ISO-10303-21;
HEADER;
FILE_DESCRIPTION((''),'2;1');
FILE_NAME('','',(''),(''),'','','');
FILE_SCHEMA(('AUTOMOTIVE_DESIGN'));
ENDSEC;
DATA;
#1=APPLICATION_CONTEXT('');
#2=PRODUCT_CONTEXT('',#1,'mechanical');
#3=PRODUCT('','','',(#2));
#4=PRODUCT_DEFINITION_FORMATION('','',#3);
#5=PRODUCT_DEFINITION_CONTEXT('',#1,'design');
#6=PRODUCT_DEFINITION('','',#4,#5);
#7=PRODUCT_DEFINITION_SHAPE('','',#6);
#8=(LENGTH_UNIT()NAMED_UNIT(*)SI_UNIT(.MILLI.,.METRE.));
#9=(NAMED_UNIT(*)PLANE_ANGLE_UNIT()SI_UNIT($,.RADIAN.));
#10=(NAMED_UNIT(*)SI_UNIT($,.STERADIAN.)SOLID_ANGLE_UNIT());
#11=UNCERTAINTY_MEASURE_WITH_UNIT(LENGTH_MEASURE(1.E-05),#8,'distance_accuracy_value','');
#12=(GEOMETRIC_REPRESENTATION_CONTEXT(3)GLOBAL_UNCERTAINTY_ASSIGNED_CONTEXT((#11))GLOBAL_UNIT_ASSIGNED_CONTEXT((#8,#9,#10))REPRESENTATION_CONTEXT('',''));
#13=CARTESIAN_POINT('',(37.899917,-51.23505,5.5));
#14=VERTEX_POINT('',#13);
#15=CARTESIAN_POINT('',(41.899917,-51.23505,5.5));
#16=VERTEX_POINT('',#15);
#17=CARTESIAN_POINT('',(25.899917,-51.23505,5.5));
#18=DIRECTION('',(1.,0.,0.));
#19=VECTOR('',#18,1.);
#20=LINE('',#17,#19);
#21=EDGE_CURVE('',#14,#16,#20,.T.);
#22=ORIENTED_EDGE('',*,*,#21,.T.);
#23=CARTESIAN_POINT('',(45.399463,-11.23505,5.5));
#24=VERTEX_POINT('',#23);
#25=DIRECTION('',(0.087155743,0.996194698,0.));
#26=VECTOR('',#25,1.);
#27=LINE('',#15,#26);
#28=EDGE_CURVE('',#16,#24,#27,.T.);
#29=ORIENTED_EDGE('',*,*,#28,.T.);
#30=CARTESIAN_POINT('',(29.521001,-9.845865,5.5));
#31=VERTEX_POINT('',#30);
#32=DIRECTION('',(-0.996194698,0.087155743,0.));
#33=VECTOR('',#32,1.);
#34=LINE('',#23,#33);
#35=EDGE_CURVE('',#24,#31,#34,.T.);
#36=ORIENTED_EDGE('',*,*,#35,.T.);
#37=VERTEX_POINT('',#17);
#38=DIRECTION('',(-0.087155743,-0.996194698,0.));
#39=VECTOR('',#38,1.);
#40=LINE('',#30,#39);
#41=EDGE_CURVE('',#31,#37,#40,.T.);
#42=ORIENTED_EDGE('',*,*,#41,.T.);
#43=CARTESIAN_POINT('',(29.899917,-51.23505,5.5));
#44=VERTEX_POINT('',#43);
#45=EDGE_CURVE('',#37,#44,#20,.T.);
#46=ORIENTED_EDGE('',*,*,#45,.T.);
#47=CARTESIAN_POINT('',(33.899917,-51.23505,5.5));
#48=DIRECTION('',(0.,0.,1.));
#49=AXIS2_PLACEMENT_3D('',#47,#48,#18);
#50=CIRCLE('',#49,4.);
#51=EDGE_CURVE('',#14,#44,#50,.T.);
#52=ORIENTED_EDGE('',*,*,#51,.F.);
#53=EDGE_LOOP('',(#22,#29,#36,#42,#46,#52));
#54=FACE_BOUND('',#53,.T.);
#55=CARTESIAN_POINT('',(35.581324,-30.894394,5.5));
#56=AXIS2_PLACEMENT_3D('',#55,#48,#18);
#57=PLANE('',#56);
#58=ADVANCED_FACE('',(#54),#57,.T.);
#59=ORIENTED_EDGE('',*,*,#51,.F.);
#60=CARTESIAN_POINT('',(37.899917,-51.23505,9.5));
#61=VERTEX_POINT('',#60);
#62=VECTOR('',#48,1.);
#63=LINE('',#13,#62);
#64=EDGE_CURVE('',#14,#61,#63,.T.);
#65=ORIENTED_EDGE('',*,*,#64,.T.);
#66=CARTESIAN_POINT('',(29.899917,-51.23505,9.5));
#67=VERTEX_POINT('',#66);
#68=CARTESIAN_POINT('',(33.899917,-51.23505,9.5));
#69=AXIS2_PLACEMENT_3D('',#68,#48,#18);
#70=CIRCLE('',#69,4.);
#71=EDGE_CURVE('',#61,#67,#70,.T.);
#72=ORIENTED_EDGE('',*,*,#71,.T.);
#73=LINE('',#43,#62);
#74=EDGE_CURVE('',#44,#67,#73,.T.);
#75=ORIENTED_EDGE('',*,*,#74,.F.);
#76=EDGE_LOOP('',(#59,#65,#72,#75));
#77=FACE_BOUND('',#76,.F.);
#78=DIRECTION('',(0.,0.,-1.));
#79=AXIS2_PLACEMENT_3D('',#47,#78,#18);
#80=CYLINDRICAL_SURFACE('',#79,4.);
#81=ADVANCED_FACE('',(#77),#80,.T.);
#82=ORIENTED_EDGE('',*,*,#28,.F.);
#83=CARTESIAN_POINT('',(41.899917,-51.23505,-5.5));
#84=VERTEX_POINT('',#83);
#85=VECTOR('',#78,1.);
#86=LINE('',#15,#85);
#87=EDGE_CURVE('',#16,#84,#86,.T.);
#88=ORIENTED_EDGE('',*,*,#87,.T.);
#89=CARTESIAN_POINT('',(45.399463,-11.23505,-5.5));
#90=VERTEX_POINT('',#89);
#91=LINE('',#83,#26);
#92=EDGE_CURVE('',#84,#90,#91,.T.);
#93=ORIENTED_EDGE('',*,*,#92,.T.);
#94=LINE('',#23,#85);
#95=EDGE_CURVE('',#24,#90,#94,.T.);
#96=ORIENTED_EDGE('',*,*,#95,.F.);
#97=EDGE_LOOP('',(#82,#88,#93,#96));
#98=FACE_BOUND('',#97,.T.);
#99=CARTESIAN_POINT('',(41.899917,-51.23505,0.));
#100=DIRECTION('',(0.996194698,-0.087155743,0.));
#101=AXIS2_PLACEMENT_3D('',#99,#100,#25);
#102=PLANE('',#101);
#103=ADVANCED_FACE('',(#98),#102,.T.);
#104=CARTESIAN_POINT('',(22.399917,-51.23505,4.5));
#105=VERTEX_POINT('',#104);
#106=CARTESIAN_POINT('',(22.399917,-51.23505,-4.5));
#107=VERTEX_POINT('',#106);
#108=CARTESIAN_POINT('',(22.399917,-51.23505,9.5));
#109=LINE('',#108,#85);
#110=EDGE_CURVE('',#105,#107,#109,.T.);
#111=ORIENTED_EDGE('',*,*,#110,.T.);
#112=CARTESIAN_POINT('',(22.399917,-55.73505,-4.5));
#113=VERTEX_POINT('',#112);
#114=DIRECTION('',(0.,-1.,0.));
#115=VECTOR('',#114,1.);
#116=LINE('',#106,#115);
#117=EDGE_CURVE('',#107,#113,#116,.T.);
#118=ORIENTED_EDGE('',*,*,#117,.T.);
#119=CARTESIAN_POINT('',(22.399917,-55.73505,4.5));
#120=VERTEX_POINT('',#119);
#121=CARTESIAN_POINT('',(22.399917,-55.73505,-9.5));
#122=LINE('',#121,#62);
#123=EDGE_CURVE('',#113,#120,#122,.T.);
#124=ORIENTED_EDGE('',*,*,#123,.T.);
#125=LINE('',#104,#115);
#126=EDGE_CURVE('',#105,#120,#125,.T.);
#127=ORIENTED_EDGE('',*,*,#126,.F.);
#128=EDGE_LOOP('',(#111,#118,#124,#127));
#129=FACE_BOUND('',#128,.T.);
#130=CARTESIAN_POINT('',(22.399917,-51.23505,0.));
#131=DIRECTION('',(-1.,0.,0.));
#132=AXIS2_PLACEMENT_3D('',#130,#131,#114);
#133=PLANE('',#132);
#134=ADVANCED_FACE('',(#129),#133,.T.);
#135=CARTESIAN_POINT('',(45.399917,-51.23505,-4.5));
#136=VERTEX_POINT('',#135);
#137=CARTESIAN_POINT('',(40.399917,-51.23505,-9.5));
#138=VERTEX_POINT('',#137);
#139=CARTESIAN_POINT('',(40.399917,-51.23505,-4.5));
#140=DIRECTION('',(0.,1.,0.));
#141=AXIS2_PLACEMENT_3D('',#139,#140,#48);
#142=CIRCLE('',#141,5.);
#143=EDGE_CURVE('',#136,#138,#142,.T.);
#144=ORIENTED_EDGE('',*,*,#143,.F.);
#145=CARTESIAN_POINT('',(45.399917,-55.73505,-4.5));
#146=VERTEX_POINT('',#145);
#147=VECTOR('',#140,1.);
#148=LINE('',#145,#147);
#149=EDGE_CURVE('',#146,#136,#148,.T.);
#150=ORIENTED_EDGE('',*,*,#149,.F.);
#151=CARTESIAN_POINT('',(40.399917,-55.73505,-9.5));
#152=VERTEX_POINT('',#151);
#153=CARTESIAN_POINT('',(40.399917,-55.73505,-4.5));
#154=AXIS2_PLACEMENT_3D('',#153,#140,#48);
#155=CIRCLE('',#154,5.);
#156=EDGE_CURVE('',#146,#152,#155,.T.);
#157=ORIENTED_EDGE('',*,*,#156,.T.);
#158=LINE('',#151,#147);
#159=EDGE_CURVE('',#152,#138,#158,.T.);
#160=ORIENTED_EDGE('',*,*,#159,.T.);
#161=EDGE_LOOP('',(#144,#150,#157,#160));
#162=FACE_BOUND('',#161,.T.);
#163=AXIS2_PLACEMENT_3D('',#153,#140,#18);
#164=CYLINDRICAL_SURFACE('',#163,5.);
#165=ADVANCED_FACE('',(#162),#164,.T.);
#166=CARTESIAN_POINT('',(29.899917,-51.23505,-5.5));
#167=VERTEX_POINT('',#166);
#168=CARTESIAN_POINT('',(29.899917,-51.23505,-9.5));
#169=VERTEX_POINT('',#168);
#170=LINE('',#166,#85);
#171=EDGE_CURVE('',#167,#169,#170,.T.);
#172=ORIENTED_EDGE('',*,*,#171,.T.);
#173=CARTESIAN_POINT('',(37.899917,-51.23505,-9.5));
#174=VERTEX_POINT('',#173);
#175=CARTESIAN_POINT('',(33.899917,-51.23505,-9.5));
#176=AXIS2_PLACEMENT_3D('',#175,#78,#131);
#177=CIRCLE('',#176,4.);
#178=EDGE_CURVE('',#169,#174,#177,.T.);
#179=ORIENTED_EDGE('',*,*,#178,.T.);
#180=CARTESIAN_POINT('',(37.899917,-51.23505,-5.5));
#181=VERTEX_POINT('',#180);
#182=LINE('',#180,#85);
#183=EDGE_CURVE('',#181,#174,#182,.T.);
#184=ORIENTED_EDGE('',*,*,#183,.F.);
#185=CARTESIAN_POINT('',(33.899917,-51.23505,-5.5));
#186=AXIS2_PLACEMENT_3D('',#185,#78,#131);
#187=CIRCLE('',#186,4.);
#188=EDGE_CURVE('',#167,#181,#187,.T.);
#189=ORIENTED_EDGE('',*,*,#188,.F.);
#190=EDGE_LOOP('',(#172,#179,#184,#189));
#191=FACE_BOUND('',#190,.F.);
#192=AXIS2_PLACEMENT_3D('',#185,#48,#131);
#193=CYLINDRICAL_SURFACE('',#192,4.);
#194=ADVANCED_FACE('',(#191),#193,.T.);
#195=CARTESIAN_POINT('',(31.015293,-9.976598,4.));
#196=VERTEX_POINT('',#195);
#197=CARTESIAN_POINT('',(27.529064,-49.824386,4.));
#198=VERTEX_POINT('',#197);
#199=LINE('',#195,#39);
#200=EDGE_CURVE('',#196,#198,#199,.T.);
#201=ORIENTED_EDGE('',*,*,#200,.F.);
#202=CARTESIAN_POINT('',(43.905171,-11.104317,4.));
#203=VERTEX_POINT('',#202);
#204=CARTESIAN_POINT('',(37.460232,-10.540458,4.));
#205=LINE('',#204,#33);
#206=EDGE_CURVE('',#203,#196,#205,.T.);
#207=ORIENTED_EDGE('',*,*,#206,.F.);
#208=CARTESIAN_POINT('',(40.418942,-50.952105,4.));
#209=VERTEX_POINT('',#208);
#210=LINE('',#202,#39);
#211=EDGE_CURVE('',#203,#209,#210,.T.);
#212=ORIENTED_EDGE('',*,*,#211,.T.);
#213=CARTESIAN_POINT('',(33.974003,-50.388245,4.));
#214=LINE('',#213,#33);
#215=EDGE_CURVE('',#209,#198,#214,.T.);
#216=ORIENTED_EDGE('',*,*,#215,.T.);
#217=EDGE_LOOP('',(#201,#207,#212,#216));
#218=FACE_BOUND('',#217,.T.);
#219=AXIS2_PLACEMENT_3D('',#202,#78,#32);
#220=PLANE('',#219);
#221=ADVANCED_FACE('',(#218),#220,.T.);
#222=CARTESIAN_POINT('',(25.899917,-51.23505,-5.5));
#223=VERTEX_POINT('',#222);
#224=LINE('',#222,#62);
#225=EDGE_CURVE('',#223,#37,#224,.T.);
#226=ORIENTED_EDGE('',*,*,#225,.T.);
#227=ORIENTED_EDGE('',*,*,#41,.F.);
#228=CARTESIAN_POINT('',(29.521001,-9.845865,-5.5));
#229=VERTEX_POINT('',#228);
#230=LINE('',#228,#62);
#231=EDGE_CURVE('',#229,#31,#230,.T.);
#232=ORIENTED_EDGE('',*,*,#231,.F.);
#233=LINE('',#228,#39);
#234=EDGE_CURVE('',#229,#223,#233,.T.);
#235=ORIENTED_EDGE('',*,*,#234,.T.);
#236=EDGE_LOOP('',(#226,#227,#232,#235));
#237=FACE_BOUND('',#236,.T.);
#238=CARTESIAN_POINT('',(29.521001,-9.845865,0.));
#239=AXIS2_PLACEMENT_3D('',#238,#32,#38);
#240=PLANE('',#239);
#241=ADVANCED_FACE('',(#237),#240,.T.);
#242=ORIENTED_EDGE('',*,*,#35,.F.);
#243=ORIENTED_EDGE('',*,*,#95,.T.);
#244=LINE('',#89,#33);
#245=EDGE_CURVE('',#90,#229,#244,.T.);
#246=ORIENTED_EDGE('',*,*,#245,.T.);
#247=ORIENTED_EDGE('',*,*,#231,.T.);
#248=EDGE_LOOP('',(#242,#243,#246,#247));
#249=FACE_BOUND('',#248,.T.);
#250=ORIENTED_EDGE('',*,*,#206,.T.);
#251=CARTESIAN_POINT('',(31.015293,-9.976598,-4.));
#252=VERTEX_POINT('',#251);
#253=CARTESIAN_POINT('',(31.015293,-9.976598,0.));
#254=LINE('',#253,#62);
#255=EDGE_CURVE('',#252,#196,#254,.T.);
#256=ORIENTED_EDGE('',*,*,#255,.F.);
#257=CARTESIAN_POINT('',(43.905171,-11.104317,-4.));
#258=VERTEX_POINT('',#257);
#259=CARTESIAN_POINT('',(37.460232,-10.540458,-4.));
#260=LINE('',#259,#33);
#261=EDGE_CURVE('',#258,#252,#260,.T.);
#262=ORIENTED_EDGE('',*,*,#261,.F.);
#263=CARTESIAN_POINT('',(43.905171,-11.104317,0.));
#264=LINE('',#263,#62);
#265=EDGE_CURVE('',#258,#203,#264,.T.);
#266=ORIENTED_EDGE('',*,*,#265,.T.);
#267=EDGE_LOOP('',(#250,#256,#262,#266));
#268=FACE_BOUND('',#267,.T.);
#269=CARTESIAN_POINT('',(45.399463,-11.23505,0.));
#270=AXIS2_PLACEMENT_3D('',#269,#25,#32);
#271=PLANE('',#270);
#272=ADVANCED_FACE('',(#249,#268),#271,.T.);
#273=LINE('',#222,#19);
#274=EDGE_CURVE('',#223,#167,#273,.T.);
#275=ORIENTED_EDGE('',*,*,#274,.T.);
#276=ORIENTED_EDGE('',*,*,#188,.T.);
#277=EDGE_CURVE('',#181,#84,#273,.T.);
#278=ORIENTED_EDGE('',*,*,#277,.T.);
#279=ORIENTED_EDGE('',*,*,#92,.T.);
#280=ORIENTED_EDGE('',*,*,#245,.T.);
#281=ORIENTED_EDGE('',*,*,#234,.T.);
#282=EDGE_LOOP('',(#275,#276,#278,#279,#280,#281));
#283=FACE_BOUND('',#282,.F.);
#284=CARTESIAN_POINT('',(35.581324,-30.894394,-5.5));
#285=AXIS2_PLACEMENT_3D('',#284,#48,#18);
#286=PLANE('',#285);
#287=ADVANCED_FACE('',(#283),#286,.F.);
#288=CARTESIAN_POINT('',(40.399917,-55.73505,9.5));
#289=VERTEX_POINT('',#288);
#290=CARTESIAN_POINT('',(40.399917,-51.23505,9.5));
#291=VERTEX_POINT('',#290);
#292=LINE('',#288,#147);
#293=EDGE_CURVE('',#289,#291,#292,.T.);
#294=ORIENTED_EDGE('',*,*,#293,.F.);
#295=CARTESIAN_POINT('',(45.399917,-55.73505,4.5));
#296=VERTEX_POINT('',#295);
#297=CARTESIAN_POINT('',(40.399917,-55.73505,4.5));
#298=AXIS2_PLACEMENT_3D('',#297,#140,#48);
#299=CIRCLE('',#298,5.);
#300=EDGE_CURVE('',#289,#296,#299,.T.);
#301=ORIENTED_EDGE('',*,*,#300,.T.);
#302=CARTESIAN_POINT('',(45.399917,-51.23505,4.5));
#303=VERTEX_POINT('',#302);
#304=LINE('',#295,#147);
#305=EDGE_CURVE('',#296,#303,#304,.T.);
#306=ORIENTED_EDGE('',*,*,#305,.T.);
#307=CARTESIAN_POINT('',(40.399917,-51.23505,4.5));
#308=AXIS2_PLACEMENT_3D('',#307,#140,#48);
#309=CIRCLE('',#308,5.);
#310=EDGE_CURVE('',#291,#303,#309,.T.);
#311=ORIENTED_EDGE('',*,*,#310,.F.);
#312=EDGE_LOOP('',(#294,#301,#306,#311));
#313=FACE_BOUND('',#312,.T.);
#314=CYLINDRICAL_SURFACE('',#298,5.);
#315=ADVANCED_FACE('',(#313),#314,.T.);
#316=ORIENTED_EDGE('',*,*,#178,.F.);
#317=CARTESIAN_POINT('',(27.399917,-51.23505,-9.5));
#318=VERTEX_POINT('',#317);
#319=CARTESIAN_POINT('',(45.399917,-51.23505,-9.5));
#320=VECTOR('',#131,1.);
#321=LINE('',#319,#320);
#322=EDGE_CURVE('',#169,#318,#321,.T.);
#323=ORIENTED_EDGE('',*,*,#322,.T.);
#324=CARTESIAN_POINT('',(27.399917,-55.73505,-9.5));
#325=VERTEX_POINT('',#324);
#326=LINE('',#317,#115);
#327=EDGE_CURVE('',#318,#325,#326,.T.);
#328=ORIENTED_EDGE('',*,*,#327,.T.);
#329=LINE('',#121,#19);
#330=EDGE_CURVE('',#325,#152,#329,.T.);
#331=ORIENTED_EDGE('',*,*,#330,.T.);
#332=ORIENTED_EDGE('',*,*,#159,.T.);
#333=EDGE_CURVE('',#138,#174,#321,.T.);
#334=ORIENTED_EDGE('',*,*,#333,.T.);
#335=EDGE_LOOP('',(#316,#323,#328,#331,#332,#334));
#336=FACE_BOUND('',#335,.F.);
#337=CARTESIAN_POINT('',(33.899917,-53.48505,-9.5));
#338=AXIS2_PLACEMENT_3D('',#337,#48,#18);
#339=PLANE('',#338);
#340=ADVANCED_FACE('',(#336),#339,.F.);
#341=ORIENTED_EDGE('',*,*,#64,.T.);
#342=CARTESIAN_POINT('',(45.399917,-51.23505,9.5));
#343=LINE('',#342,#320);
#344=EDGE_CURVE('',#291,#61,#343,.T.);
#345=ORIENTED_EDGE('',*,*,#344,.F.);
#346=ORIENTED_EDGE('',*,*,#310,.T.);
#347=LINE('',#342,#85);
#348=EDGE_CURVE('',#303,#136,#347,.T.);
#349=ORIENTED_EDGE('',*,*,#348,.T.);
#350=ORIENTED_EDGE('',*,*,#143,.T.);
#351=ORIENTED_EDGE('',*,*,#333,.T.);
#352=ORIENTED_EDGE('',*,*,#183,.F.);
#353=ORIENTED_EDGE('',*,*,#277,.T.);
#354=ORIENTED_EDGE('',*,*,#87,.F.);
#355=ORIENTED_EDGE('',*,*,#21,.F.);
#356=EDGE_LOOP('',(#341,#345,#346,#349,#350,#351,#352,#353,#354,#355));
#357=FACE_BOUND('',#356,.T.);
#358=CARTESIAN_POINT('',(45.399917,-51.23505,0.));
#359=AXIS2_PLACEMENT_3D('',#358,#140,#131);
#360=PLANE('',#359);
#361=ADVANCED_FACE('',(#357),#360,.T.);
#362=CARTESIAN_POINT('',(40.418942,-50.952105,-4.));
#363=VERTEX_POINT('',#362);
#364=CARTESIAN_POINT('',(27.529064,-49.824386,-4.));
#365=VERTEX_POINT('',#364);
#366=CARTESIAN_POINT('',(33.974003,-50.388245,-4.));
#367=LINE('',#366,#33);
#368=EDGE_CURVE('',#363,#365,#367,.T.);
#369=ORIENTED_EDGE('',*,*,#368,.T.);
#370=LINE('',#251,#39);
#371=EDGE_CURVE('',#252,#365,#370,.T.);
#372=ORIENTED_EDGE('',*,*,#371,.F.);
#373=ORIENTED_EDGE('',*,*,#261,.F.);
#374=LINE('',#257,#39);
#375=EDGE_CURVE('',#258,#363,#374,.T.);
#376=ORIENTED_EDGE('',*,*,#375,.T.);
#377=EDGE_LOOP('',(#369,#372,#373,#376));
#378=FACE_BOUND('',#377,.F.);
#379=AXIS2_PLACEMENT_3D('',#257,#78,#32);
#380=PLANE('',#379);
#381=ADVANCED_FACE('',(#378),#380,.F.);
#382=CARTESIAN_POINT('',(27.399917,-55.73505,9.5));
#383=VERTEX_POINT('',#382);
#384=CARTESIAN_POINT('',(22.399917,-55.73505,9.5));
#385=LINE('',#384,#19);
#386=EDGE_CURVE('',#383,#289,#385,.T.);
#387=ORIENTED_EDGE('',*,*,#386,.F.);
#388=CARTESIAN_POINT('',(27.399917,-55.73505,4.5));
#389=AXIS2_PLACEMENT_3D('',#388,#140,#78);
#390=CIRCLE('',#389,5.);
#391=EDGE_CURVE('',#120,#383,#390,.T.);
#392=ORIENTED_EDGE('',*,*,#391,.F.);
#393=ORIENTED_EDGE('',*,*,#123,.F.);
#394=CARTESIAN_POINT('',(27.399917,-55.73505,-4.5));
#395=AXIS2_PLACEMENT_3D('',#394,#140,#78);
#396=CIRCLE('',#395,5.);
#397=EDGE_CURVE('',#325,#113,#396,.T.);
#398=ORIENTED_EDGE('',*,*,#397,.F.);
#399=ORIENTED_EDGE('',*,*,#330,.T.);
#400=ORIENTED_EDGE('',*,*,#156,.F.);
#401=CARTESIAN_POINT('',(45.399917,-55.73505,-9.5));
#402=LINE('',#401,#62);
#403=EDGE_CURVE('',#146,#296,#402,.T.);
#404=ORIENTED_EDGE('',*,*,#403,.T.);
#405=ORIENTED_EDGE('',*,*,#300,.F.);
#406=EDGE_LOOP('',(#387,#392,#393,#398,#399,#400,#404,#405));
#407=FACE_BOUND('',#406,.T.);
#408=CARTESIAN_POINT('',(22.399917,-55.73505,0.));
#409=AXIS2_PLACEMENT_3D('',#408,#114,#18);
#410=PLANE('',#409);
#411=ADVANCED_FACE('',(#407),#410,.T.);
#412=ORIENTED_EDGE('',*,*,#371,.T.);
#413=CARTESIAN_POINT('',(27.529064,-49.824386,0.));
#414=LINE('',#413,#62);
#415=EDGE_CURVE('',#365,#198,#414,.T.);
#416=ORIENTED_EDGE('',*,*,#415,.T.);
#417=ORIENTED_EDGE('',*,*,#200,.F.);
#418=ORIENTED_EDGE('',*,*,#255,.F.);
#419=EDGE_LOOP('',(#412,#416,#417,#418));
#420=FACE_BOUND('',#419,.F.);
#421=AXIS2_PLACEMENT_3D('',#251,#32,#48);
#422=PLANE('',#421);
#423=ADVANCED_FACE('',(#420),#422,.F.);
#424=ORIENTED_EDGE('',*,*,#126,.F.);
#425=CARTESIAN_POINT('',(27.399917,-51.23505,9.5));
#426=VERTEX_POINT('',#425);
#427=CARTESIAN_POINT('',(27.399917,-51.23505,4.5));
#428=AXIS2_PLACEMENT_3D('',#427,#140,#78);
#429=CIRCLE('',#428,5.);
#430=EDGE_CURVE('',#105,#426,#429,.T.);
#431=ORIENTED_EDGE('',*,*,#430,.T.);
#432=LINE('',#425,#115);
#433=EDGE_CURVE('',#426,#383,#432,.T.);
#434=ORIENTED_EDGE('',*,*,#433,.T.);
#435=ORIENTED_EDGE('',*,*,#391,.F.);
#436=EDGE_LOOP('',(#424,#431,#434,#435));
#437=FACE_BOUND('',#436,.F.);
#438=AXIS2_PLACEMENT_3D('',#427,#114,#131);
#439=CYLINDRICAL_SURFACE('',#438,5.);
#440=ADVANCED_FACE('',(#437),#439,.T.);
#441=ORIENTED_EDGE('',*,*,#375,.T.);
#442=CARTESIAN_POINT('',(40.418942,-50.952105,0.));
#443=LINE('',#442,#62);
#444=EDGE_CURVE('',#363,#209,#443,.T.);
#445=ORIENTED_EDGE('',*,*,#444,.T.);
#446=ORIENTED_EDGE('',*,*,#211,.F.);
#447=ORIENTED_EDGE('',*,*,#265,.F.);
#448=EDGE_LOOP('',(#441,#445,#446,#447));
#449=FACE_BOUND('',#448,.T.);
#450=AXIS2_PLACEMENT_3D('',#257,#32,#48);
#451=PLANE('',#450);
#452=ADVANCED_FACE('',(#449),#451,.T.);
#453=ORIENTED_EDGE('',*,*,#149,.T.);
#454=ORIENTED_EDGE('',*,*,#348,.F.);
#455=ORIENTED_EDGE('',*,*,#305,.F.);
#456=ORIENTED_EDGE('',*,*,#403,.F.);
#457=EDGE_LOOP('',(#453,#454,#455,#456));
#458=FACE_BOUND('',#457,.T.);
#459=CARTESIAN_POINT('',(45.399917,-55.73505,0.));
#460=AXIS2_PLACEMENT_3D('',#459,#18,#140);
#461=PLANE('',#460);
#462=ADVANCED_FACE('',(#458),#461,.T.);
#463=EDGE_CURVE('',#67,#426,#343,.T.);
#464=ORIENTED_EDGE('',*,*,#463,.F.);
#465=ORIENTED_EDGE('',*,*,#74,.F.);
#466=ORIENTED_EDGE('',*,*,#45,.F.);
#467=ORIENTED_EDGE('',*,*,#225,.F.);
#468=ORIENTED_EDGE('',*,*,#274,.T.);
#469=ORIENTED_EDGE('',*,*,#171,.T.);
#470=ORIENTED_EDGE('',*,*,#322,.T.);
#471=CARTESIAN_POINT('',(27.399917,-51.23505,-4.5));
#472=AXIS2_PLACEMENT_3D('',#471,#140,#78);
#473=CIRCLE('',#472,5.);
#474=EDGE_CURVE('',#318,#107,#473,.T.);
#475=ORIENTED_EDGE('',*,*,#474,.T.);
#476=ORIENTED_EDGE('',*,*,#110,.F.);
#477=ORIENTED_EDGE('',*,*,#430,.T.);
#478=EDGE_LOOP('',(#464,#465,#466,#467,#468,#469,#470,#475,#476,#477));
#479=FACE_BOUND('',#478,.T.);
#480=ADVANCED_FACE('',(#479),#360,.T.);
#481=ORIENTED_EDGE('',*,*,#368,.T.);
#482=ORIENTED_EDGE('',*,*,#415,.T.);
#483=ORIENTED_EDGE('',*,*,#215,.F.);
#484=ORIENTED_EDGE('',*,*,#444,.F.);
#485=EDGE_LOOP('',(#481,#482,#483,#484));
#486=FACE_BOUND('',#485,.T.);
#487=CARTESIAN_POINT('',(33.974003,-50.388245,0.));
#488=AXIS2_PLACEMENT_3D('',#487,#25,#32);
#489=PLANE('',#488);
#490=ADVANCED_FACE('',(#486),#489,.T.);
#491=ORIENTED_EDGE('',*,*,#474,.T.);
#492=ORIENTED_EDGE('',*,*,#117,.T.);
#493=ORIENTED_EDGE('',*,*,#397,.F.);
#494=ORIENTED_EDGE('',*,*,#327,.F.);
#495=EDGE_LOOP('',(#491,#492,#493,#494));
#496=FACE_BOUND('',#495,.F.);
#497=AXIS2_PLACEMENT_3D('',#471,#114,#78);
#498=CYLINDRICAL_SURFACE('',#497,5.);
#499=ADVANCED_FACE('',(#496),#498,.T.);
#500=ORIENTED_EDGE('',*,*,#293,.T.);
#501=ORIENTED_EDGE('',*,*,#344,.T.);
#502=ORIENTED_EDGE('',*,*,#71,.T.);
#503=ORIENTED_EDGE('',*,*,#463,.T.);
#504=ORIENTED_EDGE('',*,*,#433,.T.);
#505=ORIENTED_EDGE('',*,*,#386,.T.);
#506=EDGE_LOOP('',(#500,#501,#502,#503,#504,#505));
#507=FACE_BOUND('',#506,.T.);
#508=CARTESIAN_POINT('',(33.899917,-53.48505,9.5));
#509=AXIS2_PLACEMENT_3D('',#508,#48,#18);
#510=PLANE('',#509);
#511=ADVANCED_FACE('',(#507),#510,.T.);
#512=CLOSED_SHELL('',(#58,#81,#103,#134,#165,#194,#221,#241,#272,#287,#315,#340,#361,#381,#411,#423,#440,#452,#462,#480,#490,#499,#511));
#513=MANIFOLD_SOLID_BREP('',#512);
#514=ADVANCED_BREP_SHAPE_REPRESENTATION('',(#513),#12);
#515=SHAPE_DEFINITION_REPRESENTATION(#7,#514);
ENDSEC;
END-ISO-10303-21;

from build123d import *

# Parameters (mm, degrees)
F1_DEPTH  = 5.5
F2_DEPTH  = 9.5
F5_DEPTH  = 4
F7_DEPTH  = 4
F8_R      = 5
F9_R      = 5
F10_R     = 5
F11_R     = 5
F3_W      = 12.9391151695
F3_H      = 8
F12_DEPTH = 40


# Not quite as in the source:
# - a feature names something its author has since deleted; it is built from what else it names


with BuildPart() as f1:
    # F0 (on Top) → F1 (new body, symmetric)
    with BuildSketch(Plane.XY):
        Polygon((45.3994634662, -11.2350502836), (29.5210014421, -9.8458648622), (25.8999169252, -51.2350502836), (41.8999169252, -51.2350502836), align=None)
    extrude(amount=F1_DEPTH, both=True)

    # F0 (on Top) → F2 (join, symmetric)
    with BuildSketch(Plane.XY):
        Polygon((41.8999169252, -51.2350502836), (25.8999169252, -51.2350502836), (22.3999169252, -51.2350502836), (22.3999169252, -55.7350502836), (45.3999169252, -55.7350502836), (45.3999169252, -51.2350502836), align=None)
    extrude(amount=F2_DEPTH, both=True)

    # F4 (on face) → F5 (join)
    with BuildSketch(Plane.XY.offset(5.5)):
        with BuildLine():
            Line((29.8999169252, -51.2350502836), (37.8999169252, -51.2350502836))
            ThreePointArc((37.8999169252, -51.2350502836), (33.8999169252, -47.2350502836), (29.8999169252, -51.2350502836))
        make_face()
    extrude(amount=F5_DEPTH)

    # F6 (on face) → F7 (join)
    with BuildSketch(Plane(origin=(0, 0, -5.5), x_dir=(1, 0, 0), z_dir=(0, 0, -1))):
        with BuildLine():
            ThreePointArc((29.8999169252, 51.2350502836), (33.8999169252, 47.2350502836), (37.8999169252, 51.2350502836))
            Line((37.8999169252, 51.2350502836), (29.8999169252, 51.2350502836))
        make_face()
    extrude(amount=F7_DEPTH)

    # F8
    f8_edges = [f1.edges().sort_by_distance(p)[0] for p in [
        (22.399917, -53.48505, 9.5),
    ]]
    fillet(f8_edges, radius=F8_R)

    # F9
    f9_edges = [f1.edges().sort_by_distance(p)[0] for p in [
        (45.399917, -53.48505, 9.5),
    ]]
    fillet(f9_edges, radius=F9_R)

    # F10
    f10_edges = [f1.edges().sort_by_distance(p)[0] for p in [
        (45.399917, -53.48505, -9.5),
    ]]
    fillet(f10_edges, radius=F10_R)

    # F11
    f11_edges = [f1.edges().sort_by_distance(p)[0] for p in [
        (22.399917, -53.48505, -9.5),
    ]]
    fillet(f11_edges, radius=F11_R)

    # F3 (on face) → F12 (cut)
    with BuildSketch(Plane(origin=(-0.6306130728, -7.2079404052, 0), x_dir=(-0.9961946981, 0.0871557427, 0), z_dir=(0.0871557427, 0.9961946981, 0))):
        with Locations((-38.2363463688, 0)):
            Rectangle(F3_W, F3_H)
    extrude(amount=-F12_DEPTH, mode=Mode.SUBTRACT)


solid = f1.part
